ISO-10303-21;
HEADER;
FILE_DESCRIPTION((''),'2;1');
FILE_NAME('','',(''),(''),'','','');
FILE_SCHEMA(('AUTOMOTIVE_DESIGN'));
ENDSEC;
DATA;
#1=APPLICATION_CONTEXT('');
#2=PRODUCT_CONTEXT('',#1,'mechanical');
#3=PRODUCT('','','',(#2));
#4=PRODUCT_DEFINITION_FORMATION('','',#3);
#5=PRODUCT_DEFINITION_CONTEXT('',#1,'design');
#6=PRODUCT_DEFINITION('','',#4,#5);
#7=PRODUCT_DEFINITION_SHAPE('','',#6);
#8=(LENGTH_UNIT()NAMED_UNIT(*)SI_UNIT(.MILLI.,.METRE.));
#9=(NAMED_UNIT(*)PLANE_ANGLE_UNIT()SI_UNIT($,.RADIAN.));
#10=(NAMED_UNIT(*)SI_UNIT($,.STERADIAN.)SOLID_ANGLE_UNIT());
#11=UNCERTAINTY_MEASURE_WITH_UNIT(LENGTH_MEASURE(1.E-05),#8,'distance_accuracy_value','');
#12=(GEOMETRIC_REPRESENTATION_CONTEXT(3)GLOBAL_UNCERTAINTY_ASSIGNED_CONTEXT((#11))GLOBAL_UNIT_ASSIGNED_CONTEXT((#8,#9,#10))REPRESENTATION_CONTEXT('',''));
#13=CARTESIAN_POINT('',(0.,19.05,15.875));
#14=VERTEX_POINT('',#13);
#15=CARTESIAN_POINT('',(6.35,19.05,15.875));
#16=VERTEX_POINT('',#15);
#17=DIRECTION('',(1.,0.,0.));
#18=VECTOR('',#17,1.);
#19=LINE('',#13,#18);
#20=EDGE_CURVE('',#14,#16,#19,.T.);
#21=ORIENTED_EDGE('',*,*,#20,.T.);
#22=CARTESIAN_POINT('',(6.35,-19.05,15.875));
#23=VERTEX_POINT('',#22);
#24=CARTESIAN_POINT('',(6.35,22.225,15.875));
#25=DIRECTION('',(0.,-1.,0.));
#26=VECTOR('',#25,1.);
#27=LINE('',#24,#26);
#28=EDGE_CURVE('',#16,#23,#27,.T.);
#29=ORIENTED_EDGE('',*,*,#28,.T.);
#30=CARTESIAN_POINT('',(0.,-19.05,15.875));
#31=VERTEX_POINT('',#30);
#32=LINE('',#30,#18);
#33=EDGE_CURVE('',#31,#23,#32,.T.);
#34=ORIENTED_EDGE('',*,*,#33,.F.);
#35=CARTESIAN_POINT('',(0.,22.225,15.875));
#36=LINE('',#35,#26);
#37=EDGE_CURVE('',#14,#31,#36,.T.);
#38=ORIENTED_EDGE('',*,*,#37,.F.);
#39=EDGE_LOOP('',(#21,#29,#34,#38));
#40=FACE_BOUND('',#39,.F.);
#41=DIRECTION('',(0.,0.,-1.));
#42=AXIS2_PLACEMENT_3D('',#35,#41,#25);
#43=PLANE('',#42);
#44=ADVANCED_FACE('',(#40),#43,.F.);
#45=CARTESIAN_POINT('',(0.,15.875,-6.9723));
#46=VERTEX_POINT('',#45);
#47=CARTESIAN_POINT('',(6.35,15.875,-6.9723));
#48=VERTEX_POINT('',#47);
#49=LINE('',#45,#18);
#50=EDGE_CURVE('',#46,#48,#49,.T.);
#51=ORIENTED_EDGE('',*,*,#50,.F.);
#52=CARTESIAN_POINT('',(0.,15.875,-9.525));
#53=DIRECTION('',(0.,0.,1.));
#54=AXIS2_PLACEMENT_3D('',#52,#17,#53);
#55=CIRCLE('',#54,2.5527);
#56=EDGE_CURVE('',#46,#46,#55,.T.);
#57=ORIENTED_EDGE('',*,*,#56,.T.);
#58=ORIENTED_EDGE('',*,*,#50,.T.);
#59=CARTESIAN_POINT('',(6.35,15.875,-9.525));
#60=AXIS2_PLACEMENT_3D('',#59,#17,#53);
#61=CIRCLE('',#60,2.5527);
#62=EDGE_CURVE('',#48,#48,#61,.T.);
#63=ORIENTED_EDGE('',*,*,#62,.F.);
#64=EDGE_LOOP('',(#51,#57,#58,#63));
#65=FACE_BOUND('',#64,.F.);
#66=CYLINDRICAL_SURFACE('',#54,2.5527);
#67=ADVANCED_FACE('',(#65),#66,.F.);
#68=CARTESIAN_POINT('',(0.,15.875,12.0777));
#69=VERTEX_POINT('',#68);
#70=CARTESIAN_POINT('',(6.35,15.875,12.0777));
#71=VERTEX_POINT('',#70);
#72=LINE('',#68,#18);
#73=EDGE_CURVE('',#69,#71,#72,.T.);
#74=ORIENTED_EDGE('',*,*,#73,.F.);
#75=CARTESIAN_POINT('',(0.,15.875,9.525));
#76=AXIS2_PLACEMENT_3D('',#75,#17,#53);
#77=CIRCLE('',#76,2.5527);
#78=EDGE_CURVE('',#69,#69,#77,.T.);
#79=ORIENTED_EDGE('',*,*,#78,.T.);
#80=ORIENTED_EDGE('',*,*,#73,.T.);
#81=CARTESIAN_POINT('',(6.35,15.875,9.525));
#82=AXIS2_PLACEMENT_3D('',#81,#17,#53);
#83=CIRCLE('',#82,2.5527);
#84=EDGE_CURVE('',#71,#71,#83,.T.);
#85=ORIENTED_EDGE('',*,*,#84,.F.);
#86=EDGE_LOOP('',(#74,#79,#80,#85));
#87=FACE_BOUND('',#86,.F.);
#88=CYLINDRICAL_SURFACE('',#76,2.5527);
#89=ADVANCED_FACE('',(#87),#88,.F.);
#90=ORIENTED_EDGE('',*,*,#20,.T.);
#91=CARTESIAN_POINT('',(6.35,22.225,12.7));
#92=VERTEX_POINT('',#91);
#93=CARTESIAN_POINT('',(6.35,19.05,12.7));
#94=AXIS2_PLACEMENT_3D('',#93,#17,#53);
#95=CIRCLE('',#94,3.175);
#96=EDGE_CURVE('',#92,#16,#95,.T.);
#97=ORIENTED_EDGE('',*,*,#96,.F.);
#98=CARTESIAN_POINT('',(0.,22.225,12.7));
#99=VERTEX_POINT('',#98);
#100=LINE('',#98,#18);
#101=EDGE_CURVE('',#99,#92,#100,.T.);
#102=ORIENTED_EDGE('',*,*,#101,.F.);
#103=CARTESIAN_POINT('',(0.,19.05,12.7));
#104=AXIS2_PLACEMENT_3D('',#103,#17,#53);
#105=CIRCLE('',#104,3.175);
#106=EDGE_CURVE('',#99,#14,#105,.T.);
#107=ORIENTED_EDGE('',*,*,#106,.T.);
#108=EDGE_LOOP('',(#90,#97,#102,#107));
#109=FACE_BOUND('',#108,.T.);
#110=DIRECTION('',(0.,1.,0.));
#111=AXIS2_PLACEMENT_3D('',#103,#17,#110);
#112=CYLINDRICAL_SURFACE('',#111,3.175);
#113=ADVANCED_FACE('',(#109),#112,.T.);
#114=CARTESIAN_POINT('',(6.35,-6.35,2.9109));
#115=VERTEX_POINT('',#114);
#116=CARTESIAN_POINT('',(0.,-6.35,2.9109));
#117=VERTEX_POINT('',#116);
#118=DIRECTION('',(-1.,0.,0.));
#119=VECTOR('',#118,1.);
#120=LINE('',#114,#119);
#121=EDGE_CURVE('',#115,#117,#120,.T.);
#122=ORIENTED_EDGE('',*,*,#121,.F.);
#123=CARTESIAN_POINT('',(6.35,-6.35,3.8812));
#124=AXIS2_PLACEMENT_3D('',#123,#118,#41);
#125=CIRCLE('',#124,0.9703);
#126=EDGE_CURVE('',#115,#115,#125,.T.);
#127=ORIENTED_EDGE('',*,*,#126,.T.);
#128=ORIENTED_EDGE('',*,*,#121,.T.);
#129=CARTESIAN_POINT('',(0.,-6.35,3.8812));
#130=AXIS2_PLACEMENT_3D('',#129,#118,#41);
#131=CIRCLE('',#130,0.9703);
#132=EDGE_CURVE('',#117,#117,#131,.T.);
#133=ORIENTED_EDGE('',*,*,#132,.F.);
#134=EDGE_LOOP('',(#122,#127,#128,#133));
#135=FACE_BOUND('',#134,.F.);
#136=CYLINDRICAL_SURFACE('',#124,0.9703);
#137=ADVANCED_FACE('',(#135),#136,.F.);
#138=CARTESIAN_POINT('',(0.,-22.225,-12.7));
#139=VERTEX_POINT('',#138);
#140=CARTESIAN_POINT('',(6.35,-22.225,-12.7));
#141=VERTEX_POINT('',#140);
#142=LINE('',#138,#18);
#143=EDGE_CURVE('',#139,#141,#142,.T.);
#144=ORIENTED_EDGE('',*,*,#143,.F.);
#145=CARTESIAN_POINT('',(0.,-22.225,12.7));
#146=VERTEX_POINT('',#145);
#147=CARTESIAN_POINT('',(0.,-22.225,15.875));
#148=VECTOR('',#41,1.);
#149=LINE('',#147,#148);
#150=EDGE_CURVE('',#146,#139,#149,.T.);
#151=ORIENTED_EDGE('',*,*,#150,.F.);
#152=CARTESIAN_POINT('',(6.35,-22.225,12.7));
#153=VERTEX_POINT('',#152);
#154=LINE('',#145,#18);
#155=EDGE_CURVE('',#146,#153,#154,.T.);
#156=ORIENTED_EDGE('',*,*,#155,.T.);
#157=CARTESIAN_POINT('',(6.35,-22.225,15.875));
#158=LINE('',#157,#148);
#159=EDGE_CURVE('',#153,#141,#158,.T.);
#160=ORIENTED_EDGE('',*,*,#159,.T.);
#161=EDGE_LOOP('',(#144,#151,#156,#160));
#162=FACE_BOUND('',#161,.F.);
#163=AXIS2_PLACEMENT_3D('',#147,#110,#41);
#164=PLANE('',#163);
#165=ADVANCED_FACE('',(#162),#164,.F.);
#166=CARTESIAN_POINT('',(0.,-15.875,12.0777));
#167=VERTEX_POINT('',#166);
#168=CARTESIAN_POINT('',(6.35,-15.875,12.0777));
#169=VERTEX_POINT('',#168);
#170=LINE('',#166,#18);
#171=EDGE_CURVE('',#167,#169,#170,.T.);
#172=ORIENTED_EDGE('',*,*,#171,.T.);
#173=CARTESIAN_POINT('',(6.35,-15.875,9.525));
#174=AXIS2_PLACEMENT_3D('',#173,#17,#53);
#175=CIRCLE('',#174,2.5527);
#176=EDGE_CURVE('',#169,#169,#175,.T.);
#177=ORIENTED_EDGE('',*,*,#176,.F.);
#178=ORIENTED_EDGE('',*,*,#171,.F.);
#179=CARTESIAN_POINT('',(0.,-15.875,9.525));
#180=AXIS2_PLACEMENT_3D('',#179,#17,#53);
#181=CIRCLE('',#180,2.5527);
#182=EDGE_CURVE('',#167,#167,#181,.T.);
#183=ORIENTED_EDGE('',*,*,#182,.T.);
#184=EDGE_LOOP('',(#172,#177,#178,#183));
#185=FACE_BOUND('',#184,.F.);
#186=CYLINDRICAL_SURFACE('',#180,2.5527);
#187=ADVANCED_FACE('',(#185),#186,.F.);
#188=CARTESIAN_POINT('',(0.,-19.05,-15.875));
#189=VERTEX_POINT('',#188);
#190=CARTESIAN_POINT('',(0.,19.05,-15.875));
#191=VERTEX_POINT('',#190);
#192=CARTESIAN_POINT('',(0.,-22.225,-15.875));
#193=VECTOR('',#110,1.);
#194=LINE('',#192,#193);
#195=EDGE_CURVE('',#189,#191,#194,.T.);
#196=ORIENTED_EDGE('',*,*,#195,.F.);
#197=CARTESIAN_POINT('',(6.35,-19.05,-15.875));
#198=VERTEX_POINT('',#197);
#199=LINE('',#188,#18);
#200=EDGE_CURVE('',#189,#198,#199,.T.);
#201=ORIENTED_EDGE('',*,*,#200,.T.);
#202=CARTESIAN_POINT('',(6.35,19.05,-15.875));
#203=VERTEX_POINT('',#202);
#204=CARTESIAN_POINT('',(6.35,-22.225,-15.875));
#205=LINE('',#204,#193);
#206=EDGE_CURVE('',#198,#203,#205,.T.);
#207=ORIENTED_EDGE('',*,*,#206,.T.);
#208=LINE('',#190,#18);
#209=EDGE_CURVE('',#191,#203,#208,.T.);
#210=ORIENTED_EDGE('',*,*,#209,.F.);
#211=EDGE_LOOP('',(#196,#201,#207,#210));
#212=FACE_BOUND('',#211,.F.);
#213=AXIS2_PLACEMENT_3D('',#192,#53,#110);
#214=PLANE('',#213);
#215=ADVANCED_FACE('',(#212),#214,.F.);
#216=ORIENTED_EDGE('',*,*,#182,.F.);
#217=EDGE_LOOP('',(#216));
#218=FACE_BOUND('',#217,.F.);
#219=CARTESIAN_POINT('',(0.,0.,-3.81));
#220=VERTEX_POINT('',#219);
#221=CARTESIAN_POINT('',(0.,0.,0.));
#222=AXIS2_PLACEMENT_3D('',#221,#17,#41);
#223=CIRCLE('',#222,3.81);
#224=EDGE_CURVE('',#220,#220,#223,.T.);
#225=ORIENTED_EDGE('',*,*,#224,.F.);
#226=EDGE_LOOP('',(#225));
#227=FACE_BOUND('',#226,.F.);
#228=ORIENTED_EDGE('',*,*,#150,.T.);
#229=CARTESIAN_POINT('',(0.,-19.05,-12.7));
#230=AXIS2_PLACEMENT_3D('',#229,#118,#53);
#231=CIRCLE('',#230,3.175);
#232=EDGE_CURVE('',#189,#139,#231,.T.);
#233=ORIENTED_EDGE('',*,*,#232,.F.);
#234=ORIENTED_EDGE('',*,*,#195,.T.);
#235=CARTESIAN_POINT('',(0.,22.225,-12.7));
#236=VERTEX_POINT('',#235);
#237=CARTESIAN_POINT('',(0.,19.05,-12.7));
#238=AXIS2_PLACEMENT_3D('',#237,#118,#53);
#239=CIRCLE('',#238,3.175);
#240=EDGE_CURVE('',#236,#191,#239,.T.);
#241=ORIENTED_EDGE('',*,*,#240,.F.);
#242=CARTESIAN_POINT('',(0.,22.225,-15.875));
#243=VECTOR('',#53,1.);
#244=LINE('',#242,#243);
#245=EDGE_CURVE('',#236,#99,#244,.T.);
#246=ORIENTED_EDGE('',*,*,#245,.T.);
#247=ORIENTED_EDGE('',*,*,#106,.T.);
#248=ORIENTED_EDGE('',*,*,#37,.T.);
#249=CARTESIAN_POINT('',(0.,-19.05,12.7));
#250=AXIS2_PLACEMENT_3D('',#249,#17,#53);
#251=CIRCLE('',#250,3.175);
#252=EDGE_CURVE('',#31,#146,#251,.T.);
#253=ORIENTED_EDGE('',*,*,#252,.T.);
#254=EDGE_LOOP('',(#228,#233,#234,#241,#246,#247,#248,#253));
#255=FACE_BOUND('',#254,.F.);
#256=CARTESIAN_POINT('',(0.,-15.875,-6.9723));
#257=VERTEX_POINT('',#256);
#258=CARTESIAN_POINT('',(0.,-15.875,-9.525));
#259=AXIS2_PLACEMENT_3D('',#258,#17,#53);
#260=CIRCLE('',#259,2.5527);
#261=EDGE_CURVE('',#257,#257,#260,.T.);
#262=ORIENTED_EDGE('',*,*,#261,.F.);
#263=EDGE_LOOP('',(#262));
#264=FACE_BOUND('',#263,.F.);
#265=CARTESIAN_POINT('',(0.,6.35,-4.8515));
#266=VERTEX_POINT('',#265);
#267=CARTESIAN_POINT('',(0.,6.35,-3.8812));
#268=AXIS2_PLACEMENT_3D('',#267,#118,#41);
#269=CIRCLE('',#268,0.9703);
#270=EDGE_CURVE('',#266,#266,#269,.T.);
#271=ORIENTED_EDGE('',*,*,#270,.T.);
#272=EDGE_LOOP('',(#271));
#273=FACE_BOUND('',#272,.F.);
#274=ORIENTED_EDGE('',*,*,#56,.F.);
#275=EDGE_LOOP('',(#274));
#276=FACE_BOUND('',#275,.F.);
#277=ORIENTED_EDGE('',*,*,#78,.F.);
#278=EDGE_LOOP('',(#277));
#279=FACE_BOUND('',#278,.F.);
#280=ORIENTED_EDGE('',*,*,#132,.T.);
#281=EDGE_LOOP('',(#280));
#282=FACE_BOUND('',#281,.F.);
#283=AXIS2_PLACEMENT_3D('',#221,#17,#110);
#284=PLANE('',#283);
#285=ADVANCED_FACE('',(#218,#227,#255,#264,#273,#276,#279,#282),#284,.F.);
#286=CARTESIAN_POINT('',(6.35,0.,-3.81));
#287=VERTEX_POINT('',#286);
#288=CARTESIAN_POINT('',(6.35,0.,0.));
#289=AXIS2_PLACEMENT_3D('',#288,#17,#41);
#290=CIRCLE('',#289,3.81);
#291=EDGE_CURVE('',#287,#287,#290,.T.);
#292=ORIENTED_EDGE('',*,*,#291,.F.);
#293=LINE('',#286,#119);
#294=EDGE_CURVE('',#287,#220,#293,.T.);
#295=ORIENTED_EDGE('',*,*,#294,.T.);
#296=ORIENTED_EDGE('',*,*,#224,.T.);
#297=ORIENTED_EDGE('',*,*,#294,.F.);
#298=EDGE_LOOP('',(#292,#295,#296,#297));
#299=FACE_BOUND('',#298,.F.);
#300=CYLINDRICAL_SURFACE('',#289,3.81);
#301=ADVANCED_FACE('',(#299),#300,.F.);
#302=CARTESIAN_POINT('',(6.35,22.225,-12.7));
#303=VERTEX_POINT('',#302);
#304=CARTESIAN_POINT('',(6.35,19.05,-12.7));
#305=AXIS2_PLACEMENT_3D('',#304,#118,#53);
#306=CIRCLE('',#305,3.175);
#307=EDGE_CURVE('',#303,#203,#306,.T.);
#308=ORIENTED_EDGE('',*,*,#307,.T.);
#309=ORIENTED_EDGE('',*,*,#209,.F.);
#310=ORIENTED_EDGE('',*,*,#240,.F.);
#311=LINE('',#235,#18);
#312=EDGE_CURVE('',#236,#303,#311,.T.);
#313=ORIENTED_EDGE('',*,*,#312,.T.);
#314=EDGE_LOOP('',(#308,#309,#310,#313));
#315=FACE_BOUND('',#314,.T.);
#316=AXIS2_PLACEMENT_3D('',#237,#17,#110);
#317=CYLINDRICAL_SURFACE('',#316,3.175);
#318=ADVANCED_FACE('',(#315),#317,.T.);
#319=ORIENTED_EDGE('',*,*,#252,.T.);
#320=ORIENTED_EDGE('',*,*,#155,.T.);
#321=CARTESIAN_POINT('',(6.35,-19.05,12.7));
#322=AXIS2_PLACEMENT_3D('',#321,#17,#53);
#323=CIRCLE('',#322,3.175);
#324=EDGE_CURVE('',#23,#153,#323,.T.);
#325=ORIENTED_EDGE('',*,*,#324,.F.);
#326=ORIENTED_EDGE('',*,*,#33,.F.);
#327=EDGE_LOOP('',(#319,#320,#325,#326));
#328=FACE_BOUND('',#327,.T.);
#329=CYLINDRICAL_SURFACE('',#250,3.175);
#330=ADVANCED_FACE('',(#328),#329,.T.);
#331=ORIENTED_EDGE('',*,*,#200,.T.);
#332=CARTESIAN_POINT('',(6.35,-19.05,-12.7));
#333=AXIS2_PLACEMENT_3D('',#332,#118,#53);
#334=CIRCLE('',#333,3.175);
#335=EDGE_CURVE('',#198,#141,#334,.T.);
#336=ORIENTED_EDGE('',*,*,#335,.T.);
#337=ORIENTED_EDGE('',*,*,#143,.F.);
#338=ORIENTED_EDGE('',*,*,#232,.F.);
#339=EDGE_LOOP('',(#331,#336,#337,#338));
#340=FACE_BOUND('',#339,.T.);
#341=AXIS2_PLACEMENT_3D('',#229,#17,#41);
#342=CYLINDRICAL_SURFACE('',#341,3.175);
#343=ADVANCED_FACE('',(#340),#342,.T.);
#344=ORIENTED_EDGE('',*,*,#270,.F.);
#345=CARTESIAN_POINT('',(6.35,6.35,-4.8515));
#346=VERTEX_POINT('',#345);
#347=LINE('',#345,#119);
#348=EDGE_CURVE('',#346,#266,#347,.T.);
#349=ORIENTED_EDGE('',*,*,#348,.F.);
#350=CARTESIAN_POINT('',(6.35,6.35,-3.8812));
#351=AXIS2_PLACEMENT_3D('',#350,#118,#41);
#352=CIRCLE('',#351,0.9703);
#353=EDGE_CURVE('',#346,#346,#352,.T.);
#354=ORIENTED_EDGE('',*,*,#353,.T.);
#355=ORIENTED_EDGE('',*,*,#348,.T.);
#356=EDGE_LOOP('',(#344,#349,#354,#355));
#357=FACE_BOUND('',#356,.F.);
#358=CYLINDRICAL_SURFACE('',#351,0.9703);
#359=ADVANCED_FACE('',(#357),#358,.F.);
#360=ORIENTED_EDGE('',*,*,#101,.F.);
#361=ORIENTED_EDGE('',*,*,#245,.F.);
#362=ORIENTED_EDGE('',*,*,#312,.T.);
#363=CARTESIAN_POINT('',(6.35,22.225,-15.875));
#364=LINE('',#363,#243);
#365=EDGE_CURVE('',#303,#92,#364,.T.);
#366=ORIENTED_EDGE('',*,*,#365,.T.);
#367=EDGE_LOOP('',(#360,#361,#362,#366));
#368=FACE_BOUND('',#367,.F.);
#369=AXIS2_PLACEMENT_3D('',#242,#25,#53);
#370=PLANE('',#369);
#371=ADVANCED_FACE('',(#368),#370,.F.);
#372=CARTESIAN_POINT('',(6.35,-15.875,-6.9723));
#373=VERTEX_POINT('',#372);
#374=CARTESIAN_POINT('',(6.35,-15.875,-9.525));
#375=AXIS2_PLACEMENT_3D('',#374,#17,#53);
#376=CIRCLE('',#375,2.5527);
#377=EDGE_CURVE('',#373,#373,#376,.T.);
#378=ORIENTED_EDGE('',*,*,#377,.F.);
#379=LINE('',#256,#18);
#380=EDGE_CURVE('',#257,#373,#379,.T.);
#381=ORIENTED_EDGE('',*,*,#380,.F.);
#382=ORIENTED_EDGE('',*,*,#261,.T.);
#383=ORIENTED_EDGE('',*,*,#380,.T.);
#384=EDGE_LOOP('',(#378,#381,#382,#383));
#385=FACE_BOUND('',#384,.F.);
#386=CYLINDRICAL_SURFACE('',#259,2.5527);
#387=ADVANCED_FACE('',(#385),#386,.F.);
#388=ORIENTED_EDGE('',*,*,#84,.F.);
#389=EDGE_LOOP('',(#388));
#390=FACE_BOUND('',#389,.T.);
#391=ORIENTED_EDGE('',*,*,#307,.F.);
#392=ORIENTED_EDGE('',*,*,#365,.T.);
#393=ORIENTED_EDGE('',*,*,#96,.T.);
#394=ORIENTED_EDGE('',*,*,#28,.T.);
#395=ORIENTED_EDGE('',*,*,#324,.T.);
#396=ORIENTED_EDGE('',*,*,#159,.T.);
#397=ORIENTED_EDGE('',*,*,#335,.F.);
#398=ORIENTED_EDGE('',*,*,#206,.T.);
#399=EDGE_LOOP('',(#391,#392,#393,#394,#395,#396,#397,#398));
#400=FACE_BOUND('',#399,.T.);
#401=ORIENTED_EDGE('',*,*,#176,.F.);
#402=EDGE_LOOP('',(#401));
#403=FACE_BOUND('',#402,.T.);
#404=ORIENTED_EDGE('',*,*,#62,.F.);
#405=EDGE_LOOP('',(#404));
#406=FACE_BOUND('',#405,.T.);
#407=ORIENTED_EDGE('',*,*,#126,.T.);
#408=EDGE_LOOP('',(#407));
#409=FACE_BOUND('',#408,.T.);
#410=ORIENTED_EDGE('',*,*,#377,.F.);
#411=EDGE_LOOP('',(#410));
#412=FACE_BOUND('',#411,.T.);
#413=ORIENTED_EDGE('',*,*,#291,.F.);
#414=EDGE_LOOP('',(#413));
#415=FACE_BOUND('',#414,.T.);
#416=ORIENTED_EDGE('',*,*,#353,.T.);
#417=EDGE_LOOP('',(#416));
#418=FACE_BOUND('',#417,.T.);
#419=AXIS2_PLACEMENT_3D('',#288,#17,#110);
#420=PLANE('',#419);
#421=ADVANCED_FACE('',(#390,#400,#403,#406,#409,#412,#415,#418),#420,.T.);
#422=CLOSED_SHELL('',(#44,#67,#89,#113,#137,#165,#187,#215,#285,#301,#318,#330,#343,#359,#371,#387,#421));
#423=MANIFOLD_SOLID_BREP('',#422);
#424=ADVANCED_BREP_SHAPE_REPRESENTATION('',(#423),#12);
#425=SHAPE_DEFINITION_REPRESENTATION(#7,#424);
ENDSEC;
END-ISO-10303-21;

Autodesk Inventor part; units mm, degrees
ref_plane "YZ Plane" through (0, 0, 0) normal (1, 0, 0) x (0, 1, 0)
ref_plane "XZ Plane" through (0, 0, 0) normal (0, 1, 0) x (-1, 0, 0)
ref_plane "XY Plane" through (0, 0, 0) normal (0, 0, 1) x (1, 0, 0)
sketch "Sketch1" plane through (0, 0, 0) normal (1, 0, 0) x (0, 1, 0)
  line L0 (22.225, 15.875) -> (-22.225, 15.875)
  line L1 (-22.225, 15.875) -> (-22.225, -15.875)
  line L2 (-22.225, -15.875) -> (22.225, -15.875)
  line L3 (22.225, -15.875) -> (22.225, 15.875)
  line L4 (22.225, 15.875) -> (-22.225, -15.875) construction
  line L5 (-22.225, 15.875) -> (22.225, -15.875) construction
  line L6 (15.875, 9.525) -> (-15.875, 9.525) construction
  line L7 (-15.875, 9.525) -> (-15.875, -9.525) construction
  line L8 (-15.875, -9.525) -> (15.875, -9.525) construction
  line L9 (15.875, -9.525) -> (15.875, 9.525) construction
  line L10 (15.875, 9.525) -> (-15.875, -9.525) construction
  line L11 (-15.875, 9.525) -> (15.875, -9.525) construction
  point P0 (0, 0)
  dimension "d0" = 44.45
  dimension "d1" = 31.75
  dimension "d2" = 31.75
  dimension "d3" = 19.05
extrude "Extrusion1" add sketch "Sketch1" along normal blind 6.35
hole "Hole1" at (0, 15.875, 9.525) at (0, 15.875, -9.525) at (0, -15.875, 9.525) at (0, -15.875, -9.525) direction (1, 0, 0) diameter 5.1054 end through all clearance for "Flat Head Machine Screw (82)" size "#10" standard "Ansi Unified Screw Threads"
sketch "Sketch2" plane through (6.35, 0, 0) normal (1, 0, 0) x (0, 0, -1)
  line L0 (3.8812, 6.35) -> (-3.8812, -6.35) construction
  point P0 (0, 0)
  point P1 (0, 0)
  dimension "d13" = 14.8844
  dimension "d27" = 6.35
hole "Hole2" at (6.35, 6.35, -3.8812) at (6.35, -6.35, 3.8812) direction (-1, 0, 0) diameter 1.9406 end through all thread size "3-48 UNC" class "2B" standard "ANSI Unified Screw Threads"
sketch "Sketch3" plane through (6.35, 0, 0) normal (1, 0, 0) x (0, 0, -1)
  circle A0 centre (0, 0) radius 3.81
  dimension "d21" = 7.62
extrude "Extrusion2" cut sketch "Sketch3" against normal blind 6.35
fillet "Fillet1" radius 3.175 4 edges at (3.175, 22.225, 15.875) (3.175, 22.225, -15.875) (3.175, -22.225, -15.875) (3.175, -22.225, 15.875)
properties part number "GP5-012" material "ABS Plastic"
